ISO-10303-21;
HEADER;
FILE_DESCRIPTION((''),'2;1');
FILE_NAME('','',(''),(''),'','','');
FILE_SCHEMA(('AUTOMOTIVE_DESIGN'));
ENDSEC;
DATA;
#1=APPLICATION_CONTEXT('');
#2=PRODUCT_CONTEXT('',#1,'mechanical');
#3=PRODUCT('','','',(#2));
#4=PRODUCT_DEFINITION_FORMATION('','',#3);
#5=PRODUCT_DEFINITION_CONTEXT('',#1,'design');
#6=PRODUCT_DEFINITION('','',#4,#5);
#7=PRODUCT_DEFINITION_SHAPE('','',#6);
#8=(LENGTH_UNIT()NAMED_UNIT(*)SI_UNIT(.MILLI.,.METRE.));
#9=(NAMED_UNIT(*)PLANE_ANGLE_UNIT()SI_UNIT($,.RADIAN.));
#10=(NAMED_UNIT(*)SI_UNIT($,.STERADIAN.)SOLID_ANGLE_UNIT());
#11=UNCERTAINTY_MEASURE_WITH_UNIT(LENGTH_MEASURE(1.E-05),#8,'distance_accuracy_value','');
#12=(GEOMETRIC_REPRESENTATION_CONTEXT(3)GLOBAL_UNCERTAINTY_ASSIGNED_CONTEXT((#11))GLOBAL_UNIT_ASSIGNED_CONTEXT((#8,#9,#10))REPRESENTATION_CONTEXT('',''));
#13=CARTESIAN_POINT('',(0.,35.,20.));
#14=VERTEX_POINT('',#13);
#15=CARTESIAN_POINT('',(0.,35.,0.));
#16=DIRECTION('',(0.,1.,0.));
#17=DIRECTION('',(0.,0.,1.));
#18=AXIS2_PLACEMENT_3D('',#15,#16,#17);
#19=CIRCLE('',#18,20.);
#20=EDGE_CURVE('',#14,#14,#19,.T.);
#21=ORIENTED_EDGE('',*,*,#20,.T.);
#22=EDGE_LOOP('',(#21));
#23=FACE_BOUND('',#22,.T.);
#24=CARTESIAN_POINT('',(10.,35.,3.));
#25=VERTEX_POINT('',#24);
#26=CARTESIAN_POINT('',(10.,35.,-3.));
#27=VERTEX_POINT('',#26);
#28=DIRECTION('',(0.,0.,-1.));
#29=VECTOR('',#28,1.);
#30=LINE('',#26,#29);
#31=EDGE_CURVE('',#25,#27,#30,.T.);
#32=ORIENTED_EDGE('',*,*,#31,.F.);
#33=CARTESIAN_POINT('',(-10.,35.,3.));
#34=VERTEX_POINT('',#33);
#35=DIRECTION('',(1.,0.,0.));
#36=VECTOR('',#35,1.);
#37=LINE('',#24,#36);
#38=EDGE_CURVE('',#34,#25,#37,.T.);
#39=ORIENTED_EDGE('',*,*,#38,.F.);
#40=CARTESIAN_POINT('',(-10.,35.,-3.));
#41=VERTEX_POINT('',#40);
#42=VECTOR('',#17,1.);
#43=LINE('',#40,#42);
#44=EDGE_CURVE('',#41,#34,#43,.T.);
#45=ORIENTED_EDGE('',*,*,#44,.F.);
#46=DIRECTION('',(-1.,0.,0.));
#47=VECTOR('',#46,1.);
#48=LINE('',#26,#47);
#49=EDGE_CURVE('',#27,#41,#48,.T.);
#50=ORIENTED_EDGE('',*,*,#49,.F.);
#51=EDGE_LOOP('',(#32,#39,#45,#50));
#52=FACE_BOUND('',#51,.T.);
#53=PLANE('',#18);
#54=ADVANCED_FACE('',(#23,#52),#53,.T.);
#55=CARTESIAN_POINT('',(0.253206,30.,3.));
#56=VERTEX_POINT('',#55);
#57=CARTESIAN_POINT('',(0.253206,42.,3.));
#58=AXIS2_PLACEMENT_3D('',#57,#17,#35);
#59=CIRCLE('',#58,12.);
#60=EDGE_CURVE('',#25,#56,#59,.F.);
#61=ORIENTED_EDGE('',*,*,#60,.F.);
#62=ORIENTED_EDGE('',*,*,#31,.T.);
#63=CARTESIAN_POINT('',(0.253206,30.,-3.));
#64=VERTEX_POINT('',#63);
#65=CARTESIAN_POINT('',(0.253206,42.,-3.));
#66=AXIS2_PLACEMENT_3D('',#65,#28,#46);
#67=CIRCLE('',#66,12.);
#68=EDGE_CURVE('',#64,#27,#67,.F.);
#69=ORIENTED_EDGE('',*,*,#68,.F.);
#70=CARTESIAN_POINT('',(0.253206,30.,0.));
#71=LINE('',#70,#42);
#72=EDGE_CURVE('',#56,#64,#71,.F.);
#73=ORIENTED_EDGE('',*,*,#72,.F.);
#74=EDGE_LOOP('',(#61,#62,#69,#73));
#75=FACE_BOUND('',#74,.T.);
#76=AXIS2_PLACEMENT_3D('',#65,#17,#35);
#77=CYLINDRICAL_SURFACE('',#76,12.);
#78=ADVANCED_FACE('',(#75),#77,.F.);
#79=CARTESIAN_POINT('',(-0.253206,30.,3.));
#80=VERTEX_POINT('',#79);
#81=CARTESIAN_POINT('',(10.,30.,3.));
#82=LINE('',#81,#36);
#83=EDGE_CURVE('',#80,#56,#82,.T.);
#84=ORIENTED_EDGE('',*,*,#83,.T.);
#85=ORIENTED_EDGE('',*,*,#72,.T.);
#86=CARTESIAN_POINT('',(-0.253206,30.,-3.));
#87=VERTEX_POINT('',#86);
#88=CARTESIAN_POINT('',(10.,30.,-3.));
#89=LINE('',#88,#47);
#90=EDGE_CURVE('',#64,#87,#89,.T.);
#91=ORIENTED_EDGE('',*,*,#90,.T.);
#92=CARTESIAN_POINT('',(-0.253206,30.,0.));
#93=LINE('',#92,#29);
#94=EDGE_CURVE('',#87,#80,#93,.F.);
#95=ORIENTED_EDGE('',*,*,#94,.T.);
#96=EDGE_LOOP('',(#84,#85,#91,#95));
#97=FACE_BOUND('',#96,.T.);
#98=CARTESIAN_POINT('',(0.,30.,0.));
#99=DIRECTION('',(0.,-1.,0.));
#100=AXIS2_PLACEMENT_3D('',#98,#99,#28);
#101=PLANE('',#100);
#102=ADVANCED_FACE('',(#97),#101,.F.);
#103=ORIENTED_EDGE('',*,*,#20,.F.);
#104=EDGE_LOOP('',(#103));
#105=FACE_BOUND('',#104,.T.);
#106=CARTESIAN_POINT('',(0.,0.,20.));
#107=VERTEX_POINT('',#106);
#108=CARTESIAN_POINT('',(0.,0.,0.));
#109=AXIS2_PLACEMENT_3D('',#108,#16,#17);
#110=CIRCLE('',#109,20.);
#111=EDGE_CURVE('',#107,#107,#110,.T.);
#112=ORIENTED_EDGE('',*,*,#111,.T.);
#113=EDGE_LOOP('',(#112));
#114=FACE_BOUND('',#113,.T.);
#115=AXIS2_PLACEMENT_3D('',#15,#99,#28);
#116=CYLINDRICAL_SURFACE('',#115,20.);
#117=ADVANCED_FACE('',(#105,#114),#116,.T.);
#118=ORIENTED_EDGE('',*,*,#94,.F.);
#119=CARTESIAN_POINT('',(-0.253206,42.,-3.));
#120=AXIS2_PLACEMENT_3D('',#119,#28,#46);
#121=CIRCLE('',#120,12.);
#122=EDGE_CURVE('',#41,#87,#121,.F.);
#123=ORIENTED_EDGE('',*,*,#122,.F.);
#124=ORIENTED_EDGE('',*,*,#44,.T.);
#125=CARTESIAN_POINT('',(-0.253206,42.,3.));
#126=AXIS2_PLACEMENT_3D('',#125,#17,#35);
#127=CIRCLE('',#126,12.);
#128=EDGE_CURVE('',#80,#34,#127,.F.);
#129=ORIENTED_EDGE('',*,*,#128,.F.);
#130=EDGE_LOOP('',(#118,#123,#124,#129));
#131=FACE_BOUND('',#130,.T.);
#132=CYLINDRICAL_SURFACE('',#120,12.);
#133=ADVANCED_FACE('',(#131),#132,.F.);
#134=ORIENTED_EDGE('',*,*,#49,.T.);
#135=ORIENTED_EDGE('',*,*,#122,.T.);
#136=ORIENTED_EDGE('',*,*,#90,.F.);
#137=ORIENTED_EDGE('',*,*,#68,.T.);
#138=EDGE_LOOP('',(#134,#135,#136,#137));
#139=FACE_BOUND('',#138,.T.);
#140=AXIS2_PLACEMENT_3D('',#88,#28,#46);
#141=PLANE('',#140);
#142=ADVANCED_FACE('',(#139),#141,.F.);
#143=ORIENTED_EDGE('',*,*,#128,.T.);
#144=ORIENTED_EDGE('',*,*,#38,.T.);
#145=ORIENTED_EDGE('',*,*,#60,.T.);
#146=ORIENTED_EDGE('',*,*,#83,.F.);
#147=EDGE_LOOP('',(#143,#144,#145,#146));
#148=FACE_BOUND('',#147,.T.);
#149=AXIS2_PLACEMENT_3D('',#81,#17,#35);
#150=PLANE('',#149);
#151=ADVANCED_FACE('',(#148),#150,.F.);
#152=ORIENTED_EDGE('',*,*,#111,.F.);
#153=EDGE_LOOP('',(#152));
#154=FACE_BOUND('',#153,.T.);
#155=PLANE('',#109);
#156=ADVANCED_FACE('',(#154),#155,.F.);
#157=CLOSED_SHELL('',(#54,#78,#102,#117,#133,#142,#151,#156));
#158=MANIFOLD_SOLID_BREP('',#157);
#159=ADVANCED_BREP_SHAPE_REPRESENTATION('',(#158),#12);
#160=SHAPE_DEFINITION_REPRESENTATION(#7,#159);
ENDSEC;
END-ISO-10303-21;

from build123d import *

# Parameters (mm, degrees)
SKETCH1_R           = 20
BOSS_EXTRUDE1_DEPTH = 35
SKETCH2_W           = 20
SKETCH2_H           = 6
CUT_EXTRUDE1_DEPTH  = 5
FILLET1_R           = 12


with BuildPart() as part:
    # Sketch1 → Boss-Extrude1 (new body)
    with BuildSketch(Plane(origin=(0, 0, 0), x_dir=(1, 0, 0), z_dir=(0, 1, 0))):
        with Locations(Location((0, 0, 0), (0, 0, 270))):
            Circle(SKETCH1_R)
    extrude(amount=BOSS_EXTRUDE1_DEPTH)

    # Sketch2 → Cut-Extrude1 (cut)
    with BuildSketch(Plane(origin=(0, 35, 0), x_dir=(1, 0, 0), z_dir=(0, 1, 0))):
        Rectangle(SKETCH2_W, SKETCH2_H)
    extrude(amount=-CUT_EXTRUDE1_DEPTH, mode=Mode.SUBTRACT)

    # Fillet1
    # the kernel refuses this fillet: 12 mm, written as the material it adds along each edge
    with BuildSketch(Plane(origin=(10, 30, 3), x_dir=(0, 1, 0), z_dir=(0, 0, -1)), Plane(origin=(-10, 30, -3), x_dir=(0, 1, 0), z_dir=(0, 0, 1))) as fillet1_piece_1:
        with BuildLine():
            CenterArc((12, -9.746794345), FILLET1_R, 125.685334713, 54.314665287)
            Line((0, -9.746794345), (0, 0))
            Line((0, 0), (5, 0))
        make_face()
    extrude(amount=6)


solid = part.part
